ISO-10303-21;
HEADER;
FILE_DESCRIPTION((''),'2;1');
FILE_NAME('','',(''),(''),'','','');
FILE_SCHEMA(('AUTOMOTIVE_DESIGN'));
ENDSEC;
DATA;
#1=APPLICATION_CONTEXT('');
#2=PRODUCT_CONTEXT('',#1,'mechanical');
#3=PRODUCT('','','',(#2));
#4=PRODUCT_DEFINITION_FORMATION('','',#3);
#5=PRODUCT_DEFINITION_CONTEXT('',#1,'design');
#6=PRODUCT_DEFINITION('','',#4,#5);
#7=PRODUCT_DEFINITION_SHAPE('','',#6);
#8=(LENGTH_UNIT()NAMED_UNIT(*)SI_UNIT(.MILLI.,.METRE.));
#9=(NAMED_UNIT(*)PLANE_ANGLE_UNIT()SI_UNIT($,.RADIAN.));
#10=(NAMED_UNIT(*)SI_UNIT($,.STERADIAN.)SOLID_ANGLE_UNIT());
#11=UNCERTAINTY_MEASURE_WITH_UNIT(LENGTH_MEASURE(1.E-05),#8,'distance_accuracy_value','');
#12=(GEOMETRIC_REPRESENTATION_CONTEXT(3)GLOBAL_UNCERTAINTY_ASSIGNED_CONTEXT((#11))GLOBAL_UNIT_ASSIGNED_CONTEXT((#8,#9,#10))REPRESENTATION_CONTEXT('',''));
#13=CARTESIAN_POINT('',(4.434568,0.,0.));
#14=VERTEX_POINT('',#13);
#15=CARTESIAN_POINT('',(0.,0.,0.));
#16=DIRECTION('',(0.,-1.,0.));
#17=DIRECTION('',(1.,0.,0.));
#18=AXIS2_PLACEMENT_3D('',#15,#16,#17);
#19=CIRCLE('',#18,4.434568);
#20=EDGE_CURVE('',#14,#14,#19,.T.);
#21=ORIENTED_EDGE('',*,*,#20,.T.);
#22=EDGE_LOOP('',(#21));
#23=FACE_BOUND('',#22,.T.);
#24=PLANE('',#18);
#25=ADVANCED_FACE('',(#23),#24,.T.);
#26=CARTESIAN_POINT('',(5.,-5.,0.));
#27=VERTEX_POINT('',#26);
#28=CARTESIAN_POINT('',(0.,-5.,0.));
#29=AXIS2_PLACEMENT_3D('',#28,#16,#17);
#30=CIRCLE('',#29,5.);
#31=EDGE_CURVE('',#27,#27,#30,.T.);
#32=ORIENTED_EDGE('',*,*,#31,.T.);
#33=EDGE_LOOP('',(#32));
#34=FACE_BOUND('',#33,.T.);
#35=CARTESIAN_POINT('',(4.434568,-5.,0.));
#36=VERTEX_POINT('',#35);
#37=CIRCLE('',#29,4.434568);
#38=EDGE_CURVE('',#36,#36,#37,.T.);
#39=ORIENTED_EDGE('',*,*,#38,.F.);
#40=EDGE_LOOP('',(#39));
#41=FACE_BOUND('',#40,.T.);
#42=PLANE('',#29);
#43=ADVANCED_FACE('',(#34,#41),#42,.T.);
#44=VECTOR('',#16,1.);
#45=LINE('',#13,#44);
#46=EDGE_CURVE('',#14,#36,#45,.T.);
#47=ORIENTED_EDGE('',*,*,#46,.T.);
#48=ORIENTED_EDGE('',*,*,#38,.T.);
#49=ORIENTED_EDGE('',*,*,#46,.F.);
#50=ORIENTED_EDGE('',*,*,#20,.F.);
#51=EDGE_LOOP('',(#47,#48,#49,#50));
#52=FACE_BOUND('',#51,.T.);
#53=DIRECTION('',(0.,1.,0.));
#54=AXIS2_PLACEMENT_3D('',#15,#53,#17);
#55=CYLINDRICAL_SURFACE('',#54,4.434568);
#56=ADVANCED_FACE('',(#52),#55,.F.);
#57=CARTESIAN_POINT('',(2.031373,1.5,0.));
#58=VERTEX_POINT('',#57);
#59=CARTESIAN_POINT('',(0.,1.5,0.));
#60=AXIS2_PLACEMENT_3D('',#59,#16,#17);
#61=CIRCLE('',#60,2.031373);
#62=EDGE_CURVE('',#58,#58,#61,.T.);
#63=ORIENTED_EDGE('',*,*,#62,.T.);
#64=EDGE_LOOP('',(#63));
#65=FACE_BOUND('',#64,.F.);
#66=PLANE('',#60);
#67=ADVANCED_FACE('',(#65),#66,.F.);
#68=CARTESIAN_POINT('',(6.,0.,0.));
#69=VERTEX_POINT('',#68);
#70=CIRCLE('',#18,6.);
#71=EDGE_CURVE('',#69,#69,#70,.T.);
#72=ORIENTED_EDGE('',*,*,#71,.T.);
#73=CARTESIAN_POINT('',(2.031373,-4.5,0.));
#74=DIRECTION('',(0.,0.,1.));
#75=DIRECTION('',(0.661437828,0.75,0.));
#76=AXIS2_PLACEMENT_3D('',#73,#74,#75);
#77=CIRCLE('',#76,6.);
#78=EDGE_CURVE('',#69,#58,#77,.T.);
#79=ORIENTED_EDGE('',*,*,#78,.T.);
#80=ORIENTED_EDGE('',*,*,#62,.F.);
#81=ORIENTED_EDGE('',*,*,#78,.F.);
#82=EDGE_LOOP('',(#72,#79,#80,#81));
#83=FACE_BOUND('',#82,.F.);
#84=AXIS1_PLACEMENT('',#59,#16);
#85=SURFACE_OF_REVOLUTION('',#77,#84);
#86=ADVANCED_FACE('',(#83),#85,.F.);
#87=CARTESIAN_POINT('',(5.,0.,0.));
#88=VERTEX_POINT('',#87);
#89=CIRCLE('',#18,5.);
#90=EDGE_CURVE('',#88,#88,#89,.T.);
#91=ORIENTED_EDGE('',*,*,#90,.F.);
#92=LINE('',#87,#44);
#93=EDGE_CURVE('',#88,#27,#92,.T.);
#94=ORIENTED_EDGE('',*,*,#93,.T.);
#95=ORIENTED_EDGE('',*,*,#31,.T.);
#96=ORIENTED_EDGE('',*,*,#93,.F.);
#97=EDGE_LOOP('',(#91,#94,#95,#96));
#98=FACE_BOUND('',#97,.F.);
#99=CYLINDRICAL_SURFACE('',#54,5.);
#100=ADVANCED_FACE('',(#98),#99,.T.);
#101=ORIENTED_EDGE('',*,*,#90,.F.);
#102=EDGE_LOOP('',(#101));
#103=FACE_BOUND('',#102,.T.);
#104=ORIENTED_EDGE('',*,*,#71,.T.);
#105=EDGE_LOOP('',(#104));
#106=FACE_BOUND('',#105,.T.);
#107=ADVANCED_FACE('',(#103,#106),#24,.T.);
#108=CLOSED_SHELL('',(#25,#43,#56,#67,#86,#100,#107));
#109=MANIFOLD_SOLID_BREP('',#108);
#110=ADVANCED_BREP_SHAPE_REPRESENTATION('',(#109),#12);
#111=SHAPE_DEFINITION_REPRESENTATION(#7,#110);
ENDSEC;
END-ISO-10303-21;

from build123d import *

# Parameters (mm, degrees)
F0_R     = 5
F0_R_2   = 4.4345680592
F1_DEPTH = 5
F2_R     = 6
F3_DEPTH = 1.5


# Not quite as in the source:
# - a fillet or chamfer that OpenCascade refuses, or shapes differently, is made with other operations: its cross-section is extruded or revolved along the edge and cut away or added


with BuildPart() as f1:
    # F0 (on Front) → F1 (new body)
    with BuildSketch(Plane.XZ):
        Circle(F0_R)
        Circle(F0_R_2, mode=Mode.SUBTRACT)
    extrude(amount=F1_DEPTH)

    # F2 (on Front) → F3 (join)
    with BuildSketch(Plane.XZ):
        Circle(F2_R)
    extrude(amount=-F3_DEPTH)

    # F4: fillet of radius 6 on 1 edges, made by hand

    # F4_s1 → F4_t2 (revolve, cut)
    with BuildSketch(Plane.XY):
        with BuildLine():
            ThreePointArc((6, 0), (4.152693377, 1.1124860802), (2.0313730334, 1.5))
            Line((2.0313730334, 1.5), (2.0313730334, 1.62))
            Line((2.0313730334, 1.62), (6, 1.62))
            Line((6, 1.62), (6.12, 1.5))
            ThreePointArc((6.12, 1.5), (6.12, 0.75), (6.0793725393, 0.09))
            Line((6.0793725393, 0.09), (6, 0))
        make_face()
    revolve(axis=Axis((0, 1.5, 0), (0, -1, 0)), mode=Mode.SUBTRACT)


solid = f1.part
